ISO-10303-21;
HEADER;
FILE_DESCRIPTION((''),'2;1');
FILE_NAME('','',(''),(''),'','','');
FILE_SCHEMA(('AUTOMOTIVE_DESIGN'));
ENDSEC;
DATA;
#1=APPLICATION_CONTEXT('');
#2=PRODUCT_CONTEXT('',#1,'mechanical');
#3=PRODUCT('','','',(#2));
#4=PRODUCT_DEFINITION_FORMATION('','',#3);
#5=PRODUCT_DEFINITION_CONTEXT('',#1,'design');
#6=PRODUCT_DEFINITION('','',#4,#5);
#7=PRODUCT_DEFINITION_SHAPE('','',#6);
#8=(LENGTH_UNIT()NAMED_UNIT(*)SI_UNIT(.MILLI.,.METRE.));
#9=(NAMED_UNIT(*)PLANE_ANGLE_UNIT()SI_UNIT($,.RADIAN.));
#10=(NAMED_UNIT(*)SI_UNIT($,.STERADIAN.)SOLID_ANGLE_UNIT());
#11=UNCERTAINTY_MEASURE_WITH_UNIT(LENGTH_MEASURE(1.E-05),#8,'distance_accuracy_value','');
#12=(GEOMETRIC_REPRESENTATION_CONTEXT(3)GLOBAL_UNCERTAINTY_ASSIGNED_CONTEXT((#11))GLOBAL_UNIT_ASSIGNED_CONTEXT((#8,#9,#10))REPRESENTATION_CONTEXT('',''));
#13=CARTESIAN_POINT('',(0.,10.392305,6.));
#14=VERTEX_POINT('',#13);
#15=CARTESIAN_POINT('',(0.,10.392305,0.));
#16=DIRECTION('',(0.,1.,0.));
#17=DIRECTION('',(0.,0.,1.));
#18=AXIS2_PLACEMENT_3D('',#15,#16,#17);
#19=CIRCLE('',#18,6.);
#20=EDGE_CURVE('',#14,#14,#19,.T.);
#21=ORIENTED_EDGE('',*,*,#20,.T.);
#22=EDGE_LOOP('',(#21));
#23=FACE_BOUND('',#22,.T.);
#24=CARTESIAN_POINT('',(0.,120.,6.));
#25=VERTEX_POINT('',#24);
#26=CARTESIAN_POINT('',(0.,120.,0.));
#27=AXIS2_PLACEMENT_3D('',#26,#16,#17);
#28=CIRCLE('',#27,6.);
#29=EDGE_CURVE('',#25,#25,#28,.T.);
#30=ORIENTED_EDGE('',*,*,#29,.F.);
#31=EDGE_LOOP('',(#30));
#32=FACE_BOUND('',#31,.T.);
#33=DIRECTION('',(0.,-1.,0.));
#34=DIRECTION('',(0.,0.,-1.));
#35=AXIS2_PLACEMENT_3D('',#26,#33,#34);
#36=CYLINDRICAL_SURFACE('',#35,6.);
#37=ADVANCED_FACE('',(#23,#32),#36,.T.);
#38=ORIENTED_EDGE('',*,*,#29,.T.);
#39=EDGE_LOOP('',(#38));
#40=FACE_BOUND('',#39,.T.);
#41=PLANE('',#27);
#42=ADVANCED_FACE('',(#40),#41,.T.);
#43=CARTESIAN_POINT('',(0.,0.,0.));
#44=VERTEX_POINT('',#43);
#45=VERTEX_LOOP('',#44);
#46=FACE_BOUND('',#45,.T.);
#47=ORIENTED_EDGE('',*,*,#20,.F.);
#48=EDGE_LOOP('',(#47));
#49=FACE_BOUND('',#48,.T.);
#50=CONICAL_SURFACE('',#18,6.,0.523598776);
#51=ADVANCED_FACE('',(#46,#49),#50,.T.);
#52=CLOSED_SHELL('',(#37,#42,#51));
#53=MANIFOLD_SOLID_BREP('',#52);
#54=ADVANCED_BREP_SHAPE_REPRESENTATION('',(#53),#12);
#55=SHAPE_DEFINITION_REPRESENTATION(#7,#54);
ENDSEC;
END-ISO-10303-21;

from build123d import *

# Parameters (mm, degrees)
SKETCH1_R           = 6
BOSS_EXTRUDE1_DEPTH = 120
CHAMFER1_SIZE2      = 6
CHAMFER1_SIZE       = 10.392304845


with BuildPart() as part:
    # Sketch1 → Boss-Extrude1 (new body)
    with BuildSketch(Plane(origin=(0, 0, 0), x_dir=(1, 0, 0), z_dir=(0, 1, 0))):
        with Locations(Location((0, 0, 0), (0, 0, 270))):
            Circle(SKETCH1_R)
    extrude(amount=BOSS_EXTRUDE1_DEPTH)

    # Chamfer1
    chamfer1_edges = [part.edges().sort_by_distance(p)[0] for p in [
        (0, 0, -6),
    ]]
    chamfer1_side = [part.faces().sort_by_distance(p)[0] for p in [
        (0, 0.12, -6),
    ]]
    chamfer(chamfer1_edges, length=CHAMFER1_SIZE - 0.0001, length2=CHAMFER1_SIZE2 - 0.0001, reference=chamfer1_side[0])  # a hair under: the kernel refuses the full size


solid = part.part
